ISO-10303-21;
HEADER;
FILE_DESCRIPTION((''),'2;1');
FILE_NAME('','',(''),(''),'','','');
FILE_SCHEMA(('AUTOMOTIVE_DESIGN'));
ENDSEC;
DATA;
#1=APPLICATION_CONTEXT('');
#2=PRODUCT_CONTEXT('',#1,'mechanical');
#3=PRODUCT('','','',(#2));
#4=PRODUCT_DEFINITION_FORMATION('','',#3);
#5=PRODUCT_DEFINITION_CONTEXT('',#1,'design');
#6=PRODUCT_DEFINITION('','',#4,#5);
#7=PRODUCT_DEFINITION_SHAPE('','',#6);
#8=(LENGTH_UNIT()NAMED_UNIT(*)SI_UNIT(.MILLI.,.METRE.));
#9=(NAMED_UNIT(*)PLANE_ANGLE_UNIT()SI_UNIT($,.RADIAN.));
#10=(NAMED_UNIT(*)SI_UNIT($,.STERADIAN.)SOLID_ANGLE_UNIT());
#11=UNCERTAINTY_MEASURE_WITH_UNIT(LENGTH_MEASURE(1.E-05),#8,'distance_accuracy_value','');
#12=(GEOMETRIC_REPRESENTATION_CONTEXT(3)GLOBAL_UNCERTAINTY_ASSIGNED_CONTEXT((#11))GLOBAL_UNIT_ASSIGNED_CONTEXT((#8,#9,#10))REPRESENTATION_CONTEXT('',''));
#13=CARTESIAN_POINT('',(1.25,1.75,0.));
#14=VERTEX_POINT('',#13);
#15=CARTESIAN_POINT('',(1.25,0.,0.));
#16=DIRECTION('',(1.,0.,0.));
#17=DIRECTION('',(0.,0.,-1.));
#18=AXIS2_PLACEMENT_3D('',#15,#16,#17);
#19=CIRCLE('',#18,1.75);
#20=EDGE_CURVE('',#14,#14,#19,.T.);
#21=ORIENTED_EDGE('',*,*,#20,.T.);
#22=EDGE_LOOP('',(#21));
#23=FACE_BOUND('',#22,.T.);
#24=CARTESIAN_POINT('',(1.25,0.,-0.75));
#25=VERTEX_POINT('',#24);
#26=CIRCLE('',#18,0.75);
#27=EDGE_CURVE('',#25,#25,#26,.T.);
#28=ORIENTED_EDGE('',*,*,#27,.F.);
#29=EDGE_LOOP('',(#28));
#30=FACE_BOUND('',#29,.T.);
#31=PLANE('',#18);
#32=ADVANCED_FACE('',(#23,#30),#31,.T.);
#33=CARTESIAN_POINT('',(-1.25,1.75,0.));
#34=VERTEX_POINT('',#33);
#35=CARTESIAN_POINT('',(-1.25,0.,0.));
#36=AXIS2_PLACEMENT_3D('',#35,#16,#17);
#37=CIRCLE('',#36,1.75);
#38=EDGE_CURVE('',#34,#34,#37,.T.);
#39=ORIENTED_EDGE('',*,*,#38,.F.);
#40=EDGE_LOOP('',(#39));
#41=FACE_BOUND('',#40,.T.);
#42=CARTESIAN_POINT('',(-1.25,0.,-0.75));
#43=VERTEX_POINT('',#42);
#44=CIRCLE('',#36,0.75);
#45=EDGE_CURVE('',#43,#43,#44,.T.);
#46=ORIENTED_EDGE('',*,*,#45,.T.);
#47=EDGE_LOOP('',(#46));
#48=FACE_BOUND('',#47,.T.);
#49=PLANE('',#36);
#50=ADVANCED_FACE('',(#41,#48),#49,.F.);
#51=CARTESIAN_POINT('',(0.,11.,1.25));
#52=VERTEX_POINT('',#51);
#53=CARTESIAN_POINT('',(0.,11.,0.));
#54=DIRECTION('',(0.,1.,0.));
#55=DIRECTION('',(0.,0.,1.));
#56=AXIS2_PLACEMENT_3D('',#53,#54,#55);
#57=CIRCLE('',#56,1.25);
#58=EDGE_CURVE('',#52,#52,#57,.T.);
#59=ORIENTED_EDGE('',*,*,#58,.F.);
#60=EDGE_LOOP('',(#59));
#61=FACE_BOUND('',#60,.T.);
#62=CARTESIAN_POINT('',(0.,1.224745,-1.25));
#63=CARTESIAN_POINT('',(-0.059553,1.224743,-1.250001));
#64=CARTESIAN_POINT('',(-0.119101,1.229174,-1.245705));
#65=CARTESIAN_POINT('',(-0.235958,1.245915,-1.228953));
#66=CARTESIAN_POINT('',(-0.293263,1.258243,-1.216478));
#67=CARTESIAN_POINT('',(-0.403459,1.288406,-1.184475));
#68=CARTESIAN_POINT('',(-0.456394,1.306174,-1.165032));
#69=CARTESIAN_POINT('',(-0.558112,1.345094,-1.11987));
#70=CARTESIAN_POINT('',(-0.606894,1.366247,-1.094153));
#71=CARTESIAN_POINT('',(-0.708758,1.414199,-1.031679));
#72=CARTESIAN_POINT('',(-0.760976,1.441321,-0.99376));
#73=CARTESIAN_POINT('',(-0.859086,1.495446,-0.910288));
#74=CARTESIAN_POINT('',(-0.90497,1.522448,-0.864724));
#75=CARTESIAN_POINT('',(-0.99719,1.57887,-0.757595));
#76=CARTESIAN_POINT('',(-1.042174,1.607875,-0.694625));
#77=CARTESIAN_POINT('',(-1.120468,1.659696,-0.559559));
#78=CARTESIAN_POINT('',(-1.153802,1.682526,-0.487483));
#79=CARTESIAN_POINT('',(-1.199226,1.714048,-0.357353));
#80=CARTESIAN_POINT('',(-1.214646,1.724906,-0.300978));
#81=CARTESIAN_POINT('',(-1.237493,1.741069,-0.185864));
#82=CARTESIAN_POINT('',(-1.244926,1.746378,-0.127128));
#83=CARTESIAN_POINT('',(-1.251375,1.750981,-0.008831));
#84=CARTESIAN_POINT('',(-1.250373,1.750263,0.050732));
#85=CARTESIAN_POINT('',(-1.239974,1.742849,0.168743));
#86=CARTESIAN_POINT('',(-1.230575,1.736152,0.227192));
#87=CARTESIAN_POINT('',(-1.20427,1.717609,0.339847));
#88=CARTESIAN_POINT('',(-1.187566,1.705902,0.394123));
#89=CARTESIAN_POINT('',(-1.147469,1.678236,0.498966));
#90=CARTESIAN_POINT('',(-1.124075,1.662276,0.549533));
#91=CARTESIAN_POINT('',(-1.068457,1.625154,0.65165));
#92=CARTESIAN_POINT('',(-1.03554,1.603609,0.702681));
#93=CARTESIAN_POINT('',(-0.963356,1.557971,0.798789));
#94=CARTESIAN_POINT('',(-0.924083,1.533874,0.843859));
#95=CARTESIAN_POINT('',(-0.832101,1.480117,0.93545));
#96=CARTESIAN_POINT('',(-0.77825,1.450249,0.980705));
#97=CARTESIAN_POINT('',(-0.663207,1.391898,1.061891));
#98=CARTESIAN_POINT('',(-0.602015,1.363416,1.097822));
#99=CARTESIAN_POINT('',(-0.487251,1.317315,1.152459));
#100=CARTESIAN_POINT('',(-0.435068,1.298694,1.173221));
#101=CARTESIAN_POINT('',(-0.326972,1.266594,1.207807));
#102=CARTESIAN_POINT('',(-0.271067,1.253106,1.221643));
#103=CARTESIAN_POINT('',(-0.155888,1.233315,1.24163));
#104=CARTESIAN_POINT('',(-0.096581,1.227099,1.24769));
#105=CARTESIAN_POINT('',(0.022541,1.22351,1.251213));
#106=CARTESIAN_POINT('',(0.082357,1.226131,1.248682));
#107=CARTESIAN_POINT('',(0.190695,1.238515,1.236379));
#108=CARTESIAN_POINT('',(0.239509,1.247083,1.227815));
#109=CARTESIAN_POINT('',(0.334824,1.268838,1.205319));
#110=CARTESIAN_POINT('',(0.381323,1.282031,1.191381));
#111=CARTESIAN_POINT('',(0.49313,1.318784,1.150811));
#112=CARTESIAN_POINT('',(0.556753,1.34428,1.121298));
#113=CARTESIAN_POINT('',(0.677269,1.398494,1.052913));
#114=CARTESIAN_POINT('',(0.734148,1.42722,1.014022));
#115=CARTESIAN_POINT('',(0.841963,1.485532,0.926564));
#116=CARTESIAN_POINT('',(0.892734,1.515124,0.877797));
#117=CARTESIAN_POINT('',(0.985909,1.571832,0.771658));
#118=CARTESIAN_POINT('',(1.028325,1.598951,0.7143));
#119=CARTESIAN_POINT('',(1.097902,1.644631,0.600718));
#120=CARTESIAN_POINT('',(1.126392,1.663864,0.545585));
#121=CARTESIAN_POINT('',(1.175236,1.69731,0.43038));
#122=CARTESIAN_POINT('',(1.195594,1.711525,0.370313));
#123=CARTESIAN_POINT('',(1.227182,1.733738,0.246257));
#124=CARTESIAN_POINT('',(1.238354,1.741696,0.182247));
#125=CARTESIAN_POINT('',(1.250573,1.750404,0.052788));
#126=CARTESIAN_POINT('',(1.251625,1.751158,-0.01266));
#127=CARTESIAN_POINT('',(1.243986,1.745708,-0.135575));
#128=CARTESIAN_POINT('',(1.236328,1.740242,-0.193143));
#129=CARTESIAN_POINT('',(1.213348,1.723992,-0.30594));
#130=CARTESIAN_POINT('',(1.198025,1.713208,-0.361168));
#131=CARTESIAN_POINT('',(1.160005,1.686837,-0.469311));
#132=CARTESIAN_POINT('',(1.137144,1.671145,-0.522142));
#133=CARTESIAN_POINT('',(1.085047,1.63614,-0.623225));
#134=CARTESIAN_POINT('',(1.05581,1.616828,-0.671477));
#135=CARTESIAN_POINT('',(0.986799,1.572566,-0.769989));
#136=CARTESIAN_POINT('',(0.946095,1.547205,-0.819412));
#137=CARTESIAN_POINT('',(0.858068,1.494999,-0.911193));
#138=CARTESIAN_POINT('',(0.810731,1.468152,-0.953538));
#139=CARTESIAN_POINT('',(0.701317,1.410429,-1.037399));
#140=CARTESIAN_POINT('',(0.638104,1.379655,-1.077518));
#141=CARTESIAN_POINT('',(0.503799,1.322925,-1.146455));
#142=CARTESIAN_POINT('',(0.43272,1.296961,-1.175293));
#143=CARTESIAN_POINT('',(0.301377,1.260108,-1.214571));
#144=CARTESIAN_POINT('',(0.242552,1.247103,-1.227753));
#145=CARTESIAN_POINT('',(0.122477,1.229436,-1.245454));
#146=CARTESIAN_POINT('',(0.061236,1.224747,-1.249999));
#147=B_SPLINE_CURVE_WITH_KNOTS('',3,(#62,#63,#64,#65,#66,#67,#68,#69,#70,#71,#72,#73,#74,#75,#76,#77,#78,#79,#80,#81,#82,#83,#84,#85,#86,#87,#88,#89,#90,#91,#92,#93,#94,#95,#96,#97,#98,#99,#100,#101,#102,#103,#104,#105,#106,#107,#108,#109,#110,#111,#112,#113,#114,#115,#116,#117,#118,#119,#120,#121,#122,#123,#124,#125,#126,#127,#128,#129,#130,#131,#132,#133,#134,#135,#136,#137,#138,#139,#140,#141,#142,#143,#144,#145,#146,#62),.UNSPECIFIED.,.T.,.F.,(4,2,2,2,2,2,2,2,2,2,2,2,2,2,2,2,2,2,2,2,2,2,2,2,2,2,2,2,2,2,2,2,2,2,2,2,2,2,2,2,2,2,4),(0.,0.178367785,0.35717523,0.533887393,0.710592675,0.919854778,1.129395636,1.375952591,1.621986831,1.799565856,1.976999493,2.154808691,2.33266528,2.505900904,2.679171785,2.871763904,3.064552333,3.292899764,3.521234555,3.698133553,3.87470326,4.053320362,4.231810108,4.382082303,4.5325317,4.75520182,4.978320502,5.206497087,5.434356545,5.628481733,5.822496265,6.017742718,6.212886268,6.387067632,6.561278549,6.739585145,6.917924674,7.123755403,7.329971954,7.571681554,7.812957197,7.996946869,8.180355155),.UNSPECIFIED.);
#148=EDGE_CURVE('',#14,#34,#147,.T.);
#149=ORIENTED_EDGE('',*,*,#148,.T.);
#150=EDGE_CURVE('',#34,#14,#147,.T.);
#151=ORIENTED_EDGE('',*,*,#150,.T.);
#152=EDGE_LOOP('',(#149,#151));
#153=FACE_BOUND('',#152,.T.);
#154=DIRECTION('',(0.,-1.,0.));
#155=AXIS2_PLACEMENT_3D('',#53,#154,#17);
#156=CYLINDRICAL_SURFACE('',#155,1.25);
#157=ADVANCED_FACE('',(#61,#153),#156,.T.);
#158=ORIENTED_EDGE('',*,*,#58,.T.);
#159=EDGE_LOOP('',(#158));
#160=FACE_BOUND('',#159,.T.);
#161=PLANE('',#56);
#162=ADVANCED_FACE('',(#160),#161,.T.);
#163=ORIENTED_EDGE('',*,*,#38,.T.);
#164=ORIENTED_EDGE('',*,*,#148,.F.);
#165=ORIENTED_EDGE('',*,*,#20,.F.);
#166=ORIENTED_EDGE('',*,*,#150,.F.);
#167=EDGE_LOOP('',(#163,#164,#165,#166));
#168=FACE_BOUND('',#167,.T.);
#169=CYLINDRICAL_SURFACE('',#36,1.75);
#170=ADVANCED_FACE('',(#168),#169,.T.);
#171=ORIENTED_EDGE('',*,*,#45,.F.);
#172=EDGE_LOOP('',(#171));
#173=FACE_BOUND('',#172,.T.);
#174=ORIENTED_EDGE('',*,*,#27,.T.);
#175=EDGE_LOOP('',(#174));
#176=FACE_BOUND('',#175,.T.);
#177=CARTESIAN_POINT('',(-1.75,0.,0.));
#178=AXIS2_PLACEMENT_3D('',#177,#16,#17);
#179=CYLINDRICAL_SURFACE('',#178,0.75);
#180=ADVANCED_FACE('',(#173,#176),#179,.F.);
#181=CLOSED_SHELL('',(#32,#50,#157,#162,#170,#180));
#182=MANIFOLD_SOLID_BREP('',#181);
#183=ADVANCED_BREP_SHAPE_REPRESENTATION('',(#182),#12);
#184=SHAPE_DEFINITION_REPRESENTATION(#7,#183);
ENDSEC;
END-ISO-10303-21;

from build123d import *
from build123d.topology import SkipClean

# Parameters (mm, degrees)
SKETCH1_R                = 1.25
BOSS_EXTRUDE1_DEPTH      = 11
BOSS_EXTRUDE2_DEPTH      = 1.25
BOSS_EXTRUDE2_DEPTH_BACK = 1.25
SKETCH2_R                = 1.75
SKETCH3_R                = 0.75
CUT_EXTRUDE2_DEPTH       = 3


with BuildPart() as part:
    # Sketch1 → Boss-Extrude1 (new body)
    with BuildSketch(Plane(origin=(0, 0, 0), x_dir=(1, 0, 0), z_dir=(0, 1, 0))):
        Circle(SKETCH1_R)
    extrude(amount=BOSS_EXTRUDE1_DEPTH)

    # Sketch2 → Boss-Extrude2 (add, two sides: drawn at the far end of the back side and taken through both)
    with SkipClean():  # the faces are left unmerged after this step: merging them gives an invalid solid
        with BuildSketch(Plane(origin=(0, 0, 0), x_dir=(0, 0, -1), z_dir=(1, 0, 0)).offset(-BOSS_EXTRUDE2_DEPTH_BACK)):
            Circle(SKETCH2_R)
        extrude(amount=BOSS_EXTRUDE2_DEPTH + BOSS_EXTRUDE2_DEPTH_BACK)

    # Sketch3 → Cut-Extrude2 (cut)
    with SkipClean():  # the faces are left unmerged after this step: merging them gives an invalid solid
        with BuildSketch(Plane(origin=(1.25, 0, 0), x_dir=(0, 0, -1), z_dir=(1, 0, 0))):
            Circle(SKETCH3_R)
        extrude(amount=-CUT_EXTRUDE2_DEPTH, mode=Mode.SUBTRACT)


solid = part.part
